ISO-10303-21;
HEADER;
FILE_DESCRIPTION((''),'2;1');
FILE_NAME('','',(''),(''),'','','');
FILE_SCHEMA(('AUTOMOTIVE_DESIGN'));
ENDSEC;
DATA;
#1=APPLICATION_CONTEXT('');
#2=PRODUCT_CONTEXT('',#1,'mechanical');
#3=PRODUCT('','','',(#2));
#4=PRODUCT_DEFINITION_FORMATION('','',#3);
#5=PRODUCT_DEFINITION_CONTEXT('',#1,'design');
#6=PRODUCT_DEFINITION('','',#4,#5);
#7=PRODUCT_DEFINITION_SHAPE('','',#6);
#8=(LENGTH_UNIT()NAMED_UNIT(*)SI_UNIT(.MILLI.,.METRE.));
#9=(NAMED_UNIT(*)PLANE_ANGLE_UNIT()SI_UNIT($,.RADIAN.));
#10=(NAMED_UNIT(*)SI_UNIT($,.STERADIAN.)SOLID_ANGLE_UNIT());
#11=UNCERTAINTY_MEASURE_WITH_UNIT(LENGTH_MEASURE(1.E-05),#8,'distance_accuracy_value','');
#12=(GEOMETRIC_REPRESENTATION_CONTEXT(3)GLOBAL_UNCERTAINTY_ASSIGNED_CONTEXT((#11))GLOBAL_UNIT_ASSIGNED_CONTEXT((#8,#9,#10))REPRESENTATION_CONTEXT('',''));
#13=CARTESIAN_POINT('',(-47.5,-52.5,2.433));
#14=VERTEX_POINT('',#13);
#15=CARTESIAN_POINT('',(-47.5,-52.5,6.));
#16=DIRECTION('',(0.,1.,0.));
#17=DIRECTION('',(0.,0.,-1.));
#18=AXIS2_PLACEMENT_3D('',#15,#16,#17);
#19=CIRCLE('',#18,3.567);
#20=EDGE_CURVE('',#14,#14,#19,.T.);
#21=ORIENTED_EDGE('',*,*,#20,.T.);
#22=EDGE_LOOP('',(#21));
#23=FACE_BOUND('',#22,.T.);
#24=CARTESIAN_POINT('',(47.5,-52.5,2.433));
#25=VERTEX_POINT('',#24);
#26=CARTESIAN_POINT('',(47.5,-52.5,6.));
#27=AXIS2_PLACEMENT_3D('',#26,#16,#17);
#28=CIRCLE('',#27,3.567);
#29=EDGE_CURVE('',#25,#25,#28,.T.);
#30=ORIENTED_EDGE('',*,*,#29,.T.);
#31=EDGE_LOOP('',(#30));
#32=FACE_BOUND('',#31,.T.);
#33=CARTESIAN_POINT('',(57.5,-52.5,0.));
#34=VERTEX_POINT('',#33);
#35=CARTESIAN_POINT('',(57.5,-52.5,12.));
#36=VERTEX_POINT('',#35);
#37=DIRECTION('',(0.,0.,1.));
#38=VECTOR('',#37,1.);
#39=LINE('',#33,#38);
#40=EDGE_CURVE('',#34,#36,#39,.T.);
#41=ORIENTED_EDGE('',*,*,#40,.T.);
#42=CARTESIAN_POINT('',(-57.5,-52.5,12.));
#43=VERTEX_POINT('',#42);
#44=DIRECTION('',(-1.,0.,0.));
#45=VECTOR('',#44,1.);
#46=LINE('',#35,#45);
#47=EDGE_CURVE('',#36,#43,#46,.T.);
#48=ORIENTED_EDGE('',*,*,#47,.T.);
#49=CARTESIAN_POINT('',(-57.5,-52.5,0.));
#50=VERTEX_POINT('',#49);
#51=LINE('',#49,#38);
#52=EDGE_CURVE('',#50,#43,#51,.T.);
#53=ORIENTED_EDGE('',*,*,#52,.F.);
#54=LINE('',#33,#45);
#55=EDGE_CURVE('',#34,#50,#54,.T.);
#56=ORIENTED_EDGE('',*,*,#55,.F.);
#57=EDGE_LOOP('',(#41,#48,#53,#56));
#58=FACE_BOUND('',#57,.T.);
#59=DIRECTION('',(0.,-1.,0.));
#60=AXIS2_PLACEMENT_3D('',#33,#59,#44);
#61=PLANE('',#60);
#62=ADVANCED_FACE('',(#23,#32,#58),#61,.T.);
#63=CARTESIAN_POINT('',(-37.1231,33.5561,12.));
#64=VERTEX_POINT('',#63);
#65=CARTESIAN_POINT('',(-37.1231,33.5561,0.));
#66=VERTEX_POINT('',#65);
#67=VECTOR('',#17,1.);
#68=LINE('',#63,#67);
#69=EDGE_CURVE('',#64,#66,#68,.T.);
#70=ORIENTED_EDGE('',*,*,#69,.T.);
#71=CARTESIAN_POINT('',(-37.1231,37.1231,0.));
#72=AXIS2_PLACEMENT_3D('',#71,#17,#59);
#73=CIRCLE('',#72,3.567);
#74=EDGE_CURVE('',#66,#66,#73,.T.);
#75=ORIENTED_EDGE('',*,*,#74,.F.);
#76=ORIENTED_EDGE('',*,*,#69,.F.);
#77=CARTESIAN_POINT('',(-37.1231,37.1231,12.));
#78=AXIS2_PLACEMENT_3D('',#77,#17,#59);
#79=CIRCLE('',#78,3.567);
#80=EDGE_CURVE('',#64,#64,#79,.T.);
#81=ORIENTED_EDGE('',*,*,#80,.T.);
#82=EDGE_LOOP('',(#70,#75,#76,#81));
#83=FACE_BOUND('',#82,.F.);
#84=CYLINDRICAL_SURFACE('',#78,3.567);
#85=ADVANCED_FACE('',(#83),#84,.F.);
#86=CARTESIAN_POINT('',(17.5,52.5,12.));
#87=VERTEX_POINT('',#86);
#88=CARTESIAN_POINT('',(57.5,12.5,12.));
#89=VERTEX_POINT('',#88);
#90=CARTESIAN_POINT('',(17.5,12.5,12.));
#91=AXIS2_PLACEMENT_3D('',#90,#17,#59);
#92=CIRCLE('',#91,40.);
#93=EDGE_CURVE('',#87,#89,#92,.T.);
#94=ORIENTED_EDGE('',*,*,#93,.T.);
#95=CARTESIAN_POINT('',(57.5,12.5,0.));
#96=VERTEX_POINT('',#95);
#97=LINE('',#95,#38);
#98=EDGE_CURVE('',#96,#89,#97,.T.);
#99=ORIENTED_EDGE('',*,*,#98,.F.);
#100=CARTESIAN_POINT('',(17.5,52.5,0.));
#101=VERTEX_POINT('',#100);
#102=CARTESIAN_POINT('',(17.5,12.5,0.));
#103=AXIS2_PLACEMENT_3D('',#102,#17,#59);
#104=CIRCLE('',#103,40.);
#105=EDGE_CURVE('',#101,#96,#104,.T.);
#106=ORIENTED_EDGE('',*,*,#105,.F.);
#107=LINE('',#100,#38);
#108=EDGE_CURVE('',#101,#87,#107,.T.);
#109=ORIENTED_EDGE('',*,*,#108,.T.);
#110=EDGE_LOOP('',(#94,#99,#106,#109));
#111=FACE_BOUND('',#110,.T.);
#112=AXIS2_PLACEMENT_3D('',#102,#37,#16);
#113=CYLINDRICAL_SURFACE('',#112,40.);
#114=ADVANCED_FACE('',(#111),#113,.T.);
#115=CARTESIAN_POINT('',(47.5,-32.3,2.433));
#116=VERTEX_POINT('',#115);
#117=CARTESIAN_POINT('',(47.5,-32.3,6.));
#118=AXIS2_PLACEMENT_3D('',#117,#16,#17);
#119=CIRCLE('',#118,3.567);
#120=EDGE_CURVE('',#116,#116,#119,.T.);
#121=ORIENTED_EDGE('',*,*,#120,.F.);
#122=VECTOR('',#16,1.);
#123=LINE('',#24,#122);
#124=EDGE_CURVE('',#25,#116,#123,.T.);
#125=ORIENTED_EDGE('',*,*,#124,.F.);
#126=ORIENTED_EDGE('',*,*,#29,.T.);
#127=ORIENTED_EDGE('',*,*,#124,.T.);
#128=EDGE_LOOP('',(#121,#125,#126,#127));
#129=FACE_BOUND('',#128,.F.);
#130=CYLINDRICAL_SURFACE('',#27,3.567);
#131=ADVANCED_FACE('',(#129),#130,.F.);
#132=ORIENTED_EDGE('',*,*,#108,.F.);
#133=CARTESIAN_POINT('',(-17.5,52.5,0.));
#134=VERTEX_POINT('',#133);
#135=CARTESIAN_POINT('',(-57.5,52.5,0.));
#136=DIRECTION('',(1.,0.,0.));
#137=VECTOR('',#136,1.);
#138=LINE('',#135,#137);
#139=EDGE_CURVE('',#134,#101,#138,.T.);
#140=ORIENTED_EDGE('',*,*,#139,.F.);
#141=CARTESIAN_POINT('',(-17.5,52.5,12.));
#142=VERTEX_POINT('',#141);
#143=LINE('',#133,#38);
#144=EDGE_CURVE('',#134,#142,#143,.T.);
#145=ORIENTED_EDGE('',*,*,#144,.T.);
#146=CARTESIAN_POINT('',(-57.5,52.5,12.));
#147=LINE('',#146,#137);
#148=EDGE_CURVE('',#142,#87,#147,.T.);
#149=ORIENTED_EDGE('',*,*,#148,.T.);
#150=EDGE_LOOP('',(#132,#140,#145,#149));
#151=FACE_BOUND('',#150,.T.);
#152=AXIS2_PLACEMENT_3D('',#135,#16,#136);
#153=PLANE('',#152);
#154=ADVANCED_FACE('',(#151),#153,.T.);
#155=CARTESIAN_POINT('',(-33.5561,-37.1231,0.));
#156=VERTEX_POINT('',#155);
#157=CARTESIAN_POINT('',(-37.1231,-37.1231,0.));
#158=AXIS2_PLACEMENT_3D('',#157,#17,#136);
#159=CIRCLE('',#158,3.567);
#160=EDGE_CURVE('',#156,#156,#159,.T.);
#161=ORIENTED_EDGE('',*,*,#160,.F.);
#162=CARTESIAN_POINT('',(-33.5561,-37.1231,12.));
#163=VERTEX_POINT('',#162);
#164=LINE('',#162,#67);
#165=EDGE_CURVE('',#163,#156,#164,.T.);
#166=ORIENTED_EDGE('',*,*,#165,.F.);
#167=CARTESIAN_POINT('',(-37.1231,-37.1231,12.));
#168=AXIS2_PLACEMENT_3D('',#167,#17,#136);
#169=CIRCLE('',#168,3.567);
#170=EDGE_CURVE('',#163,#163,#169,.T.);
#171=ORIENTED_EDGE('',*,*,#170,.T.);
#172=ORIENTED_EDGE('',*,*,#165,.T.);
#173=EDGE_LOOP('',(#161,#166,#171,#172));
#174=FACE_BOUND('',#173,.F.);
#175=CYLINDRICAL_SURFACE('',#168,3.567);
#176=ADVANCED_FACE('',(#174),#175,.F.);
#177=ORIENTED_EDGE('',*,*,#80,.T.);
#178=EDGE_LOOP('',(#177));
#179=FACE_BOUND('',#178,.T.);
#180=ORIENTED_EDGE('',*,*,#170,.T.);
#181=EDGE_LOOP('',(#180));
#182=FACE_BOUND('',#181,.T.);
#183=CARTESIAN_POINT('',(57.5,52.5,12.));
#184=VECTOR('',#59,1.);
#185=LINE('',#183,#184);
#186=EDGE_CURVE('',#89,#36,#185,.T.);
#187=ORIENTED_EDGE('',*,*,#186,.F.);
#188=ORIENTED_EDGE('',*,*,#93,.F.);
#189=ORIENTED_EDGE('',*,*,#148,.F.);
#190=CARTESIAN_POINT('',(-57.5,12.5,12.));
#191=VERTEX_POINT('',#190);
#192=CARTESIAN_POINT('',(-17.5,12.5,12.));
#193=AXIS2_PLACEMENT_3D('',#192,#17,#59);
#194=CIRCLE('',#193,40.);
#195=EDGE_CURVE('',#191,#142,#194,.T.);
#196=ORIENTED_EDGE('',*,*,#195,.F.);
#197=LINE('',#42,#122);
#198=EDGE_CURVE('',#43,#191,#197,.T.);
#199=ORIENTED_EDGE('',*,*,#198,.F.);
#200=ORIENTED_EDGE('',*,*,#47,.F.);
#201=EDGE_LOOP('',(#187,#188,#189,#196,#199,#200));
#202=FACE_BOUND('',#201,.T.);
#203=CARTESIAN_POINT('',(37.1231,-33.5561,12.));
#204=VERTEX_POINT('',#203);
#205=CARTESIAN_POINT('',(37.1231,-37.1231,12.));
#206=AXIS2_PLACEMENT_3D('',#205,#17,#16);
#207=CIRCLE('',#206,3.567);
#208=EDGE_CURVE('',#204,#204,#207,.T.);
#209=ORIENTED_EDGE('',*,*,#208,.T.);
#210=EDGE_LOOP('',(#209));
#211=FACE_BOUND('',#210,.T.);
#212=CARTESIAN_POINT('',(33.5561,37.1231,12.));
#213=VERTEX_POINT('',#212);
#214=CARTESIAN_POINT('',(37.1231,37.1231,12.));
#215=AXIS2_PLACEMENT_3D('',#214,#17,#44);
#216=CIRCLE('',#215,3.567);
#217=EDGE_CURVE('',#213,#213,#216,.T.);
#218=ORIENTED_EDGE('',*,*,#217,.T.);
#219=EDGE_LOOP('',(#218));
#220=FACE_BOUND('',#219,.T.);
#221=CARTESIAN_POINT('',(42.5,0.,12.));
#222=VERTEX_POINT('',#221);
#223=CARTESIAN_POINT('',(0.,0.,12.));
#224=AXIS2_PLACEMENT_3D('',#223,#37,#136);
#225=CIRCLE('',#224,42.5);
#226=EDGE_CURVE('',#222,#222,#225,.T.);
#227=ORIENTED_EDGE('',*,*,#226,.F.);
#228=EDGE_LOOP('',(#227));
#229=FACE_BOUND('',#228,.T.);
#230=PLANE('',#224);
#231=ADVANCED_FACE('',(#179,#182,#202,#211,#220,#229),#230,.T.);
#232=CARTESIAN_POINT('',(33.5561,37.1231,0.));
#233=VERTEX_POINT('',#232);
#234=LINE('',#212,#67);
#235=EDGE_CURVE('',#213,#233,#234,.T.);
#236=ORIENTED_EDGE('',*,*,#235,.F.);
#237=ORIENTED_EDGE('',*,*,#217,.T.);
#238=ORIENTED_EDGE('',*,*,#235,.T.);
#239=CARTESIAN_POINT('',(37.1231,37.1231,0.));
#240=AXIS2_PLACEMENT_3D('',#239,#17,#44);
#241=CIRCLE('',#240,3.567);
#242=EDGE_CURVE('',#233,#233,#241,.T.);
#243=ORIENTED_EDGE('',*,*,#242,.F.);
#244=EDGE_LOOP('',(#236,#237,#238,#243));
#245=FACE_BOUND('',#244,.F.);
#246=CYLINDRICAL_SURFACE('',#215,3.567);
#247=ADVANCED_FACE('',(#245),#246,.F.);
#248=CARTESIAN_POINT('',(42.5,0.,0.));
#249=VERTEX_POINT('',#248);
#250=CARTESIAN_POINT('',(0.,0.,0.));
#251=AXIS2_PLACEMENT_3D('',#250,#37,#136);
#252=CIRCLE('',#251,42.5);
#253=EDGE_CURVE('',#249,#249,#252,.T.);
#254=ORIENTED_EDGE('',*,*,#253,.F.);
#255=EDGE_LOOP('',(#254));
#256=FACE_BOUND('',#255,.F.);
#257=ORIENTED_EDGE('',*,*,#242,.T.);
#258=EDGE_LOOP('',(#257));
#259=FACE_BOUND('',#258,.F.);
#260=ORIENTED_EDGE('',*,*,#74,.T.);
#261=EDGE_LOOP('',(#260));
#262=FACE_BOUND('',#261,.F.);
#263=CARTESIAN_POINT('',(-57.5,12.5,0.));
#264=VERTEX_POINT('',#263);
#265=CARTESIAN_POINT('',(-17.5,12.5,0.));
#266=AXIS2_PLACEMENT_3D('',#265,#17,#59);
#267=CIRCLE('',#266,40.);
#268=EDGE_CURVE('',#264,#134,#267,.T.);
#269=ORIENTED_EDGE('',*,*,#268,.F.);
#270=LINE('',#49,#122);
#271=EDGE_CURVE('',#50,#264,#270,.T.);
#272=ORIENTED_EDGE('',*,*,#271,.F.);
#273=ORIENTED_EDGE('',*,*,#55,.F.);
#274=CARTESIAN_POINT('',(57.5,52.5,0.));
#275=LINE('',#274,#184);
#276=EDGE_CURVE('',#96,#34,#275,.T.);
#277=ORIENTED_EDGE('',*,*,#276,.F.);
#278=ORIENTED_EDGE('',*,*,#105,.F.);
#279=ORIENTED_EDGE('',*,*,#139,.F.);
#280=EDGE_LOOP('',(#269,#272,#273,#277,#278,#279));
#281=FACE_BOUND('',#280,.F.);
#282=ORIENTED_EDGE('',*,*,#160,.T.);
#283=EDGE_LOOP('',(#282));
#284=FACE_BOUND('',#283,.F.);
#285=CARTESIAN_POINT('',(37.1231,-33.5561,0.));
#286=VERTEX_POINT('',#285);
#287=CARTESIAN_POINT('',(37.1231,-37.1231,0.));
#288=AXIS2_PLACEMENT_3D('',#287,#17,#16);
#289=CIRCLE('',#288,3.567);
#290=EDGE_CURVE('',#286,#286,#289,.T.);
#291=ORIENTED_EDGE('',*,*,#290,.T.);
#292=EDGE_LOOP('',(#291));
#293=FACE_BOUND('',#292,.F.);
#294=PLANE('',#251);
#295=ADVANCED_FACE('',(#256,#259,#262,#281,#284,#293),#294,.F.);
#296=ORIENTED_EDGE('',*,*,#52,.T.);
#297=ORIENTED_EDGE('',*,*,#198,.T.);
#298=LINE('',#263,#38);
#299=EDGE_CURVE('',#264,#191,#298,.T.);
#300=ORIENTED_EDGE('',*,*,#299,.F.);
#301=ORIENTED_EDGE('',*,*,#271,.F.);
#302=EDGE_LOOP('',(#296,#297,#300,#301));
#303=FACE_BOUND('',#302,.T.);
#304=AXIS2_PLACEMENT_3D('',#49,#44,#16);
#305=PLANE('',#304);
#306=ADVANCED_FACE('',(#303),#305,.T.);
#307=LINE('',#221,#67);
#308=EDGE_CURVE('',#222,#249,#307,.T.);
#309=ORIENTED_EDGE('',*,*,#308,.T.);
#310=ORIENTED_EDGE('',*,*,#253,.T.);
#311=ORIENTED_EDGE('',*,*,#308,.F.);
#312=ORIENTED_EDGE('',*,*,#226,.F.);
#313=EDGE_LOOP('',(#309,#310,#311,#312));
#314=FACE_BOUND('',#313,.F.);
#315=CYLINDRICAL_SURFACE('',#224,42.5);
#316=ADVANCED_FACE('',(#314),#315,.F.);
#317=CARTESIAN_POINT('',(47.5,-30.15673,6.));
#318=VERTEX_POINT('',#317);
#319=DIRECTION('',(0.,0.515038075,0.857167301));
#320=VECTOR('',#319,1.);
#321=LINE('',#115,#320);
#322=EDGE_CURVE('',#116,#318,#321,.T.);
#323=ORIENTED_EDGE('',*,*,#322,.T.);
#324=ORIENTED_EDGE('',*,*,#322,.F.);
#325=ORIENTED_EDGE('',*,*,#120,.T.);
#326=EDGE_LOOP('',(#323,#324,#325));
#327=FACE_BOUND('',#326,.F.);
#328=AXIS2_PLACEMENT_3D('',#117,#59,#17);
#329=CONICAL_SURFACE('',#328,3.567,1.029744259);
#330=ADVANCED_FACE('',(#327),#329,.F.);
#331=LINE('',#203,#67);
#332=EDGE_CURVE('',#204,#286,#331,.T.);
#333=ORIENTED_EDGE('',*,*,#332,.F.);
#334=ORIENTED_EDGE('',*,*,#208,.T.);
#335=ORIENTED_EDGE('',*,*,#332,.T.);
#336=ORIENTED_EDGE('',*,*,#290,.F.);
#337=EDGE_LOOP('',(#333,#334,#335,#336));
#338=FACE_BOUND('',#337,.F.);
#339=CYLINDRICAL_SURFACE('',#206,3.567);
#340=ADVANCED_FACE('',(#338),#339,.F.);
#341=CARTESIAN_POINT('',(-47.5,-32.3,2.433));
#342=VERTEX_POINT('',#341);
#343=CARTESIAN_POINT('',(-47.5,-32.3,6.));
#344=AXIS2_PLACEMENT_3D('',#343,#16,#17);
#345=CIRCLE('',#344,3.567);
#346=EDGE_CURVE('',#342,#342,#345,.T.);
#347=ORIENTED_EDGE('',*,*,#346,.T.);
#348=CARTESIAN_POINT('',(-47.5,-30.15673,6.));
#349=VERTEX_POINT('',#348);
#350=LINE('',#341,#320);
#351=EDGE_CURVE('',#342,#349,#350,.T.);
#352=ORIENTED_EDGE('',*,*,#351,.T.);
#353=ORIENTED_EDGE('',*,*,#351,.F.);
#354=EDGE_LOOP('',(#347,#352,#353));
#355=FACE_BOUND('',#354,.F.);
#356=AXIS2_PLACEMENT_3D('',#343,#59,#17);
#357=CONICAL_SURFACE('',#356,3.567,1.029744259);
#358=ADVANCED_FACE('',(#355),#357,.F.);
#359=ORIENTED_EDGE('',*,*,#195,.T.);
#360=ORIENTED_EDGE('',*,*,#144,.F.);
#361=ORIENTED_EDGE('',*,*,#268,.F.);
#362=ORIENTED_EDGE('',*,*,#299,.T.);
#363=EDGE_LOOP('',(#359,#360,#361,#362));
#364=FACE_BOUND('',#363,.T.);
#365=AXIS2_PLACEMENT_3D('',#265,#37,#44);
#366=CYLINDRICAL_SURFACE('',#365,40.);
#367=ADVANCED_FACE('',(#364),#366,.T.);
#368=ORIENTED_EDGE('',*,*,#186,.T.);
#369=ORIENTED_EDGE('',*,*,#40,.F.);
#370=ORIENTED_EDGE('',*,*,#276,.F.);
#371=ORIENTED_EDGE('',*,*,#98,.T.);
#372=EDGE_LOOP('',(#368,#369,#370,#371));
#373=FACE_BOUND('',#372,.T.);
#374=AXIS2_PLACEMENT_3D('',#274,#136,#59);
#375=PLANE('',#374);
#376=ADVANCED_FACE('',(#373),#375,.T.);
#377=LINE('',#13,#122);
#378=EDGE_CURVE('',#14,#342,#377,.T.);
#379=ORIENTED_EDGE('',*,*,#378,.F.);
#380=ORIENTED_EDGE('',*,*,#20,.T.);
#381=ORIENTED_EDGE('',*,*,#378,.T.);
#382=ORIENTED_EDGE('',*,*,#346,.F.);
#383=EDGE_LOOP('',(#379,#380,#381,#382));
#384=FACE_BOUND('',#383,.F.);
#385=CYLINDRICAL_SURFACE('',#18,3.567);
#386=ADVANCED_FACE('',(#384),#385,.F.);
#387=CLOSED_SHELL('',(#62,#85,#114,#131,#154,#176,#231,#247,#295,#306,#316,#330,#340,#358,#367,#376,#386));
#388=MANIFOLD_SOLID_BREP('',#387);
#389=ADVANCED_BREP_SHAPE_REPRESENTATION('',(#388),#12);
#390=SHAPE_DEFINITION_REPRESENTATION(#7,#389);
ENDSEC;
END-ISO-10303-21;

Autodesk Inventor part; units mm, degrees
ref_plane "YZ Plane" through (0, 0, 0) normal (1, 0, 0) x (0, 1, 0)
ref_plane "XZ Plane" through (0, 0, 0) normal (0, 1, 0) x (-1, 0, 0)
ref_plane "XY Plane" through (0, 0, 0) normal (0, 0, 1) x (1, 0, 0)
sketch "Sketch1" plane through (0, 0, 0) normal (0, 0, 1) x (1, 0, 0)
  line L0 (57.5, -52.5) -> (-57.5, -52.5)
  line L1 (-57.5, -52.5) -> (-57.5, 52.5)
  line L2 (-57.5, 52.5) -> (57.5, 52.5)
  line L3 (57.5, 52.5) -> (57.5, -52.5)
  line L4 (57.5, -52.5) -> (-57.5, 52.5) construction
  line L5 (-57.5, -52.5) -> (57.5, 52.5) construction
  point P0 (0, 0)
  dimension "d0" = 115
  dimension "d1" = 105
extrude "Extrusion1" add sketch "Sketch1" along normal blind 12
fillet "Fillet1" radius 40 2 edges at (-57.5, 52.5, 6) (57.5, 52.5, 6)
sketch "Sketch2" plane through (-57.5, -52.5, 0) normal (0, -1, 0) x (1, 0, 0)
  line L0 (0, 0) -> (0, 12) projected
  line L1 (115, 0) -> (115, 12) projected
  line L2 (0, 12) -> (115, 12) projected
  point P0 (57.5, 0)
  point P1 (10, 6)
  point P2 (105, 6)
  dimension "d5" = 10
  dimension "d6" = 10
  dimension "d7" = 6
  dimension "d8" = 6
hole "Hole1" at (-47.5, -52.5, 6) at (47.5, -52.5, 6) direction (0, 1, 0) diameter 7.134 depth 20.2 tip angle 118 thread size "M8x0.8" class "6H" standard "ISO Metric profile"
sketch "Sketch3" plane through (0, 0, 12) normal (0, 0, 1) x (1, 0, 0)
  circle A0 centre (0, 0) radius 42.5
  dimension "d16" = 85
extrude "Extrusion2" cut sketch "Sketch3" against normal blind 12
sketch "Sketch4" plane through (0, 0, 12) normal (0, 0, 1) x (1, 0, 0)
  circle A0 centre (0, 0) radius 52.5 construction
  line L0 (0, 0) -> (-64.3477, 64.3477) construction
  line L1 (0, 0) -> (91.0013, 0) construction
  point P0 (-37.1231, 37.1231)
  dimension "d19" = 105
  dimension "d20" = 135
hole "Hole2" at (-37.1231, 37.1231, 12) direction (0, 0, -1) diameter 7.134 depth 20.2 tip angle 118 thread size "M8x0.8" class "6H" standard "ISO Metric profile"
pattern_circular "Circular Pattern1" count 4 over 360 about axis through (0, 0, -10) along (0, 0, 1) of "Hole2"
properties part number "Gear_support_wheel"
